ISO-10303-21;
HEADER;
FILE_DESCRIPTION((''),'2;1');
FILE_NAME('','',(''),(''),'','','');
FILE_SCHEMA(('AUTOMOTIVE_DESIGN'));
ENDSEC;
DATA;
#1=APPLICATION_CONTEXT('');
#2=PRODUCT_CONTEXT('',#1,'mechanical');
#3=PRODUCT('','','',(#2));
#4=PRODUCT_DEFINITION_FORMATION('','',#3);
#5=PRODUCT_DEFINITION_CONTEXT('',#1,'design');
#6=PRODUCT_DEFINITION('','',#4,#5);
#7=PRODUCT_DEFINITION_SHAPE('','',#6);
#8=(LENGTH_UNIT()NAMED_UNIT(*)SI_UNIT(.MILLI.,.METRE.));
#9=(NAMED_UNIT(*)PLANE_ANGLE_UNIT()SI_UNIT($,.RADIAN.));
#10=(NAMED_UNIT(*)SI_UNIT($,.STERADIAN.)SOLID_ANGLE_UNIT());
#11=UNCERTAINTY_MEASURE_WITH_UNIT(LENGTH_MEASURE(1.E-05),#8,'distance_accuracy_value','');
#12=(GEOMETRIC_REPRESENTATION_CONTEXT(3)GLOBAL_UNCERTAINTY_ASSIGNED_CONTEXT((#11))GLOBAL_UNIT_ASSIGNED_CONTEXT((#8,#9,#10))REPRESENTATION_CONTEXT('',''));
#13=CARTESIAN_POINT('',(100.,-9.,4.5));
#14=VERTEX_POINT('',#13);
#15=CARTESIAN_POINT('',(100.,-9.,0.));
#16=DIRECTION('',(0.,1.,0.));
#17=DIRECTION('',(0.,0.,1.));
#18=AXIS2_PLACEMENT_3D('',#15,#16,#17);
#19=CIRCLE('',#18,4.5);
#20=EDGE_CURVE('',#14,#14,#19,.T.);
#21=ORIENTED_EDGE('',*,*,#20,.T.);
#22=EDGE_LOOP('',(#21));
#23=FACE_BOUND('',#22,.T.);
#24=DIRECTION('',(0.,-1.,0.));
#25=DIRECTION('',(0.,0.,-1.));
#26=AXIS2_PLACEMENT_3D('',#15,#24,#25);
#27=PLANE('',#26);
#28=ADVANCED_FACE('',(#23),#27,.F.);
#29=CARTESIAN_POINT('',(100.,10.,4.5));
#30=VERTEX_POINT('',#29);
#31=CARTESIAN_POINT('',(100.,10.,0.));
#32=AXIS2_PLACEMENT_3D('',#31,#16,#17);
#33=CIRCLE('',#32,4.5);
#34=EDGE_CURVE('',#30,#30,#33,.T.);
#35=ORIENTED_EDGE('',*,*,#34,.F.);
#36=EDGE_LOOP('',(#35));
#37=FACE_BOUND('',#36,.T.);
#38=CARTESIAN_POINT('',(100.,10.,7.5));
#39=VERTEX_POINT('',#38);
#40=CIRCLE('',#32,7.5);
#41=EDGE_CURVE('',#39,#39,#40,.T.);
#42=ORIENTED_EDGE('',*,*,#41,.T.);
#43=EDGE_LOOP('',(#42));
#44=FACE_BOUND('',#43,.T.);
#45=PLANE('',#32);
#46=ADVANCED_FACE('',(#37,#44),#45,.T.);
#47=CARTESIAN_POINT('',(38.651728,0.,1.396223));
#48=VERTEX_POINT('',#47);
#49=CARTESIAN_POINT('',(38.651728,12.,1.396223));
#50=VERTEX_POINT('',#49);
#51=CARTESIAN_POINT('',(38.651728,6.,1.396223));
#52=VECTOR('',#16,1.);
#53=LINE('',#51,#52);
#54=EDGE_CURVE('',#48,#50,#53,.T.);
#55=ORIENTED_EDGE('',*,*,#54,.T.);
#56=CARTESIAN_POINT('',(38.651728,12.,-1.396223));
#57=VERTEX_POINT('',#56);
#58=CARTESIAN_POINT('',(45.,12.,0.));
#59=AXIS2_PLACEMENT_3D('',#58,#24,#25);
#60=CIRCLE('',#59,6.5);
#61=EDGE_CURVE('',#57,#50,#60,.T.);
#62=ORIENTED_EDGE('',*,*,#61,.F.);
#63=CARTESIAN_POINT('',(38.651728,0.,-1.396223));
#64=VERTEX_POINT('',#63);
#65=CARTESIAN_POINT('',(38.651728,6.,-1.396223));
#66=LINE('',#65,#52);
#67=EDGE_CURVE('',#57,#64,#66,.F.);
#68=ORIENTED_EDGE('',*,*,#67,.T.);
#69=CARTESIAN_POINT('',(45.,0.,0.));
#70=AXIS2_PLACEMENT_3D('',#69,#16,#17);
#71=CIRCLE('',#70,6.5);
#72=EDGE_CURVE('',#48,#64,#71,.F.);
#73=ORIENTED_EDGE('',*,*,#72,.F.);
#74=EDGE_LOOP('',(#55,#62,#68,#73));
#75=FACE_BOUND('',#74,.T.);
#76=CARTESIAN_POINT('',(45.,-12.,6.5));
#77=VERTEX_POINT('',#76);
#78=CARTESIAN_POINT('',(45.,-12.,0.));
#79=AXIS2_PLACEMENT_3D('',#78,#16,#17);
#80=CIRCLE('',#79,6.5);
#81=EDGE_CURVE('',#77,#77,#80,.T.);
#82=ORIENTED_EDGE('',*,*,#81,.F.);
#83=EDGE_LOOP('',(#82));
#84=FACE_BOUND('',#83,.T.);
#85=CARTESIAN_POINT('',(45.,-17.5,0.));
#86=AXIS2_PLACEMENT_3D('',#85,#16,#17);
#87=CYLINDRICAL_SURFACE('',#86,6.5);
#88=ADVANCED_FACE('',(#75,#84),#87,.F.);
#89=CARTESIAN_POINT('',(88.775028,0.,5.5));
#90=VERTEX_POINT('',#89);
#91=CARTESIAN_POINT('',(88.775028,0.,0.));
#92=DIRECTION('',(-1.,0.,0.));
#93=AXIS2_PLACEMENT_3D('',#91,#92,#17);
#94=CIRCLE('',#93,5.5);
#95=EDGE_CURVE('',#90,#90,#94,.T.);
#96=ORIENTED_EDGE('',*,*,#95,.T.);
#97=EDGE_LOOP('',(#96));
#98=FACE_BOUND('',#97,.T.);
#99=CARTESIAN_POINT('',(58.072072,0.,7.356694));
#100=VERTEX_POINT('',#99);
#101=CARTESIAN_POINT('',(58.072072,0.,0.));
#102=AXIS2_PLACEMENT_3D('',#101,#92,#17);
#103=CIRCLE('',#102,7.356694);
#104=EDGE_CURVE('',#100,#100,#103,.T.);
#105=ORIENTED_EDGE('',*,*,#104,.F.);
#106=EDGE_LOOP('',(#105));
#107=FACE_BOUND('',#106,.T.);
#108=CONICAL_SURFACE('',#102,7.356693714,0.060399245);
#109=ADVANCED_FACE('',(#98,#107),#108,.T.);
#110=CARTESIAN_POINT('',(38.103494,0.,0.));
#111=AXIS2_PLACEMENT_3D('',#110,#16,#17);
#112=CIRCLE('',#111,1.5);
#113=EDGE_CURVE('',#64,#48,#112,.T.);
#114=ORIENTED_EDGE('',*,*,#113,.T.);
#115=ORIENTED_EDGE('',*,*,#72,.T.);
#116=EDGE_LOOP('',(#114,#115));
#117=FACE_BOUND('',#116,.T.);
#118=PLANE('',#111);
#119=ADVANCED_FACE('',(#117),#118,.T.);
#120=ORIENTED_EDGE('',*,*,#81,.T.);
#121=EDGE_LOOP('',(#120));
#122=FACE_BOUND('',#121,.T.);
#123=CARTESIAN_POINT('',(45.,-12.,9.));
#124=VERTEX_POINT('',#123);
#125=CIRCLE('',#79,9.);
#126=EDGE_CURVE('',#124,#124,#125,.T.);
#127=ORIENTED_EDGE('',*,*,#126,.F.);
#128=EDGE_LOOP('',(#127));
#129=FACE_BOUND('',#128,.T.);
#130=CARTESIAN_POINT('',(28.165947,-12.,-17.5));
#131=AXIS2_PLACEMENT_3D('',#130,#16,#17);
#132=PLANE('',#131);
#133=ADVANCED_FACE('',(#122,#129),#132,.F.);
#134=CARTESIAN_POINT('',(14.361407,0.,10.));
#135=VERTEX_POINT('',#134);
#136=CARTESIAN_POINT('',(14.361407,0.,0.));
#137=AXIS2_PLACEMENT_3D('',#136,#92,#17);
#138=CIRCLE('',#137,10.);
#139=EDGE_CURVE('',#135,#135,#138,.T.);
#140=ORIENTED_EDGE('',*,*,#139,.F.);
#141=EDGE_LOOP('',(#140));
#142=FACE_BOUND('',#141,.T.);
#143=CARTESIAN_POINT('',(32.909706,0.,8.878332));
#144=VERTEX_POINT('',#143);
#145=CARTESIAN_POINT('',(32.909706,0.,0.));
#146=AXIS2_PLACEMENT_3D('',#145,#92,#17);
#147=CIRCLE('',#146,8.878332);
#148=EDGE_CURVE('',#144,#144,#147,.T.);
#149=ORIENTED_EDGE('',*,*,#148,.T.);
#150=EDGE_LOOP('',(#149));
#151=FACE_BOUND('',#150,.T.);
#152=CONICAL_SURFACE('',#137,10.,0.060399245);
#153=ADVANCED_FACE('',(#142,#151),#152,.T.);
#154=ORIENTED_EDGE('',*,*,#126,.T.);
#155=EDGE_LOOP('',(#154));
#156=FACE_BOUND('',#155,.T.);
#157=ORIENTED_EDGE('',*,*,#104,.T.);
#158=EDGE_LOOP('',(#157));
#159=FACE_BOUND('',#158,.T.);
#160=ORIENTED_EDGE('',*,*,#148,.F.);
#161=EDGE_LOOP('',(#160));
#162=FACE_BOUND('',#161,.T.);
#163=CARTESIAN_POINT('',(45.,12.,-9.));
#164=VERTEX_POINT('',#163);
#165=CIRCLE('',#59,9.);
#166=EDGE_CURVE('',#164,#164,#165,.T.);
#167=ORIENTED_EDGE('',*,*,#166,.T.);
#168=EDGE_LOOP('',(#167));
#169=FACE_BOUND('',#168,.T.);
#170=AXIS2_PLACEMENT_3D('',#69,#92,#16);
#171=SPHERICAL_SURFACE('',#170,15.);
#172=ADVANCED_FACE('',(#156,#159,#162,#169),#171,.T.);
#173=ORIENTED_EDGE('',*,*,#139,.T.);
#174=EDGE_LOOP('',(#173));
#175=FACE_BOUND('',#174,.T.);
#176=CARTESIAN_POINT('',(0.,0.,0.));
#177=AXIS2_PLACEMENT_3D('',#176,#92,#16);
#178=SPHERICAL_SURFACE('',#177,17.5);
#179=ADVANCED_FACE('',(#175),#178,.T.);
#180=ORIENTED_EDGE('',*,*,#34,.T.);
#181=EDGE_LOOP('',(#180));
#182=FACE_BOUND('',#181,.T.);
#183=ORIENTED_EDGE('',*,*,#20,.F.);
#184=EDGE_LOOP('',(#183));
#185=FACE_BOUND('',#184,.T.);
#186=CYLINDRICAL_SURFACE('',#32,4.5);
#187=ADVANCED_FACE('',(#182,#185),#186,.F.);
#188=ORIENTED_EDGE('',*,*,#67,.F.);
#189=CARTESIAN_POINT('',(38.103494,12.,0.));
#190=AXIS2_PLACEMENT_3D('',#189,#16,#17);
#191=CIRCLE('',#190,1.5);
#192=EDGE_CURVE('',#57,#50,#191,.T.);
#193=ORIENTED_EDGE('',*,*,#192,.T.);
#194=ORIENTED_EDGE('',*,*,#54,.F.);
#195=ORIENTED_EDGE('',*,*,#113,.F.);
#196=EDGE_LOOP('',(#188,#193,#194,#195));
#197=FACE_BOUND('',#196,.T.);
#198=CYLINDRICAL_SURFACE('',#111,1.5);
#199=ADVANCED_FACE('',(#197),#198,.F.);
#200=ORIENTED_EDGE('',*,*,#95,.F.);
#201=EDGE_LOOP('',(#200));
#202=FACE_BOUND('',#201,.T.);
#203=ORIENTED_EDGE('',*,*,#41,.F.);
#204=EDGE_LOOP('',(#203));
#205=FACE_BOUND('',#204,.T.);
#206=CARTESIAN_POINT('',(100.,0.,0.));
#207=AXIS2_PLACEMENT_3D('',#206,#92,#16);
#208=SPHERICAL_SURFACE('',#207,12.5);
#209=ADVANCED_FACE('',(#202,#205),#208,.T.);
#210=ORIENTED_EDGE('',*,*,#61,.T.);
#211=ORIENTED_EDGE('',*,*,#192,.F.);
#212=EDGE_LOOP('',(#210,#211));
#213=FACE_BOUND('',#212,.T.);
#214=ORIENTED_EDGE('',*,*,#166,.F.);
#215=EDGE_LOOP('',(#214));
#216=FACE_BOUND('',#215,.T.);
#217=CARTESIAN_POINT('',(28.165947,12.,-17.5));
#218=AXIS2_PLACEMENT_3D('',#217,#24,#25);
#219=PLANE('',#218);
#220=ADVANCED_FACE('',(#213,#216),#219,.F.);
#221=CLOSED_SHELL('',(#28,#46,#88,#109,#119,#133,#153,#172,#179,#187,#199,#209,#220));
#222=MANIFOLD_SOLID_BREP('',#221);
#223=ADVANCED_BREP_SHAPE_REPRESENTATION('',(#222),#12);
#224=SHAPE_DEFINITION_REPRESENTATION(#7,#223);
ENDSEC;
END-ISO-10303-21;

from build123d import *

# Parameters (mm, degrees)
SKETCH2_R                  = 14.892385846
CUT_EXTRUDE1_DEPTH         = 10
M10X1_0_TAPPED_HOLE1_D     = 9
M10X1_0_TAPPED_HOLE1_DEPTH = 19
CUT_EXTRUDE2_DEPTH         = 116.190060335
CUT_EXTRUDE2_DEPTH_BACK    = 116.190060335
SKETCH5_W                  = 33.852396008
SKETCH5_H                  = 3.402803332
SKETCH5_H_2                = 3.72687984
CUT_EXTRUDE3_DEPTH         = 118.612711898
CUT_EXTRUDE3_DEPTH_BACK    = 118.612711898
SKETCH6_R                  = 6.5
SKETCH7_R                  = 1.5
CUT_EXTRUDE5_DEPTH         = 12


with BuildPart() as part:
    # Sketch1 → Revolve1 (revolve)
    with BuildSketch(Plane.XY):
        with BuildLine():
            ThreePointArc((14.361406616, 10), (-5.240485866, 16.696925103), (-17.5, 0))
            Line((-17.5, 0), (112.5, 0))
            ThreePointArc((112.5, 0), (102.822928267, 12.177071733), (88.77502784, 5.5))
            Line((88.77502784, 5.5), (58.072071664, 7.356693714))
            ThreePointArc((58.072071664, 7.356693714), (45.905437929, 14.9726478), (32.909705817, 8.87833242))
            Line((32.909705817, 8.87833242), (14.361406616, 10))
        make_face()
    revolve(axis=Axis((-17.5, 0, 0), (1, 0, 0)))

    # Sketch2 → Cut-Extrude1 (cut)
    with BuildSketch(Plane(origin=(0, 10, 0), x_dir=(1, 0, 0), z_dir=(0, 1, 0))):
        with Locations((100, 0)):
            Circle(SKETCH2_R)
    extrude(amount=CUT_EXTRUDE1_DEPTH, mode=Mode.SUBTRACT)

    # M10x1.0 Tapped Hole1
    with Locations(Plane(origin=(0, 10, 0), x_dir=(1, 0, 0), z_dir=(0, 1, 0))):
        with Locations((100, 0)):
            Hole(M10X1_0_TAPPED_HOLE1_D / 2, depth=M10X1_0_TAPPED_HOLE1_DEPTH)

    # Sketch5 → Cut-Extrude2 (cut, two sides: drawn at the far end of the back side and taken through both)
    with BuildSketch(Plane.XY.offset(-CUT_EXTRUDE2_DEPTH_BACK)):
        with Locations((45.092145357, 13.701401666)):
            Rectangle(SKETCH5_W, SKETCH5_H)
        with Locations((45.092145357, -13.86343992)):
            Rectangle(SKETCH5_W, SKETCH5_H_2)
    extrude(amount=CUT_EXTRUDE2_DEPTH + CUT_EXTRUDE2_DEPTH_BACK, mode=Mode.SUBTRACT)

    # Sketch6 → Cut-Extrude3 (cut, two sides: drawn at the far end of the back side and taken through both)
    with BuildSketch(Plane(origin=(0, 12, 0), x_dir=(1, 0, 0), z_dir=(0, 1, 0)).offset(-CUT_EXTRUDE3_DEPTH_BACK)):
        with Locations((45, 0)):
            Circle(SKETCH6_R)
    extrude(amount=CUT_EXTRUDE3_DEPTH + CUT_EXTRUDE3_DEPTH_BACK, mode=Mode.SUBTRACT)

    # Sketch7 → Cut-Extrude5 (cut)
    with BuildSketch(Plane(origin=(0, 12, 0), x_dir=(1, 0, 0), z_dir=(0, 1, 0))):
        with Locations((38.103493706, 0)):
            Circle(SKETCH7_R)
    extrude(amount=-CUT_EXTRUDE5_DEPTH, mode=Mode.SUBTRACT)


solid = part.part
